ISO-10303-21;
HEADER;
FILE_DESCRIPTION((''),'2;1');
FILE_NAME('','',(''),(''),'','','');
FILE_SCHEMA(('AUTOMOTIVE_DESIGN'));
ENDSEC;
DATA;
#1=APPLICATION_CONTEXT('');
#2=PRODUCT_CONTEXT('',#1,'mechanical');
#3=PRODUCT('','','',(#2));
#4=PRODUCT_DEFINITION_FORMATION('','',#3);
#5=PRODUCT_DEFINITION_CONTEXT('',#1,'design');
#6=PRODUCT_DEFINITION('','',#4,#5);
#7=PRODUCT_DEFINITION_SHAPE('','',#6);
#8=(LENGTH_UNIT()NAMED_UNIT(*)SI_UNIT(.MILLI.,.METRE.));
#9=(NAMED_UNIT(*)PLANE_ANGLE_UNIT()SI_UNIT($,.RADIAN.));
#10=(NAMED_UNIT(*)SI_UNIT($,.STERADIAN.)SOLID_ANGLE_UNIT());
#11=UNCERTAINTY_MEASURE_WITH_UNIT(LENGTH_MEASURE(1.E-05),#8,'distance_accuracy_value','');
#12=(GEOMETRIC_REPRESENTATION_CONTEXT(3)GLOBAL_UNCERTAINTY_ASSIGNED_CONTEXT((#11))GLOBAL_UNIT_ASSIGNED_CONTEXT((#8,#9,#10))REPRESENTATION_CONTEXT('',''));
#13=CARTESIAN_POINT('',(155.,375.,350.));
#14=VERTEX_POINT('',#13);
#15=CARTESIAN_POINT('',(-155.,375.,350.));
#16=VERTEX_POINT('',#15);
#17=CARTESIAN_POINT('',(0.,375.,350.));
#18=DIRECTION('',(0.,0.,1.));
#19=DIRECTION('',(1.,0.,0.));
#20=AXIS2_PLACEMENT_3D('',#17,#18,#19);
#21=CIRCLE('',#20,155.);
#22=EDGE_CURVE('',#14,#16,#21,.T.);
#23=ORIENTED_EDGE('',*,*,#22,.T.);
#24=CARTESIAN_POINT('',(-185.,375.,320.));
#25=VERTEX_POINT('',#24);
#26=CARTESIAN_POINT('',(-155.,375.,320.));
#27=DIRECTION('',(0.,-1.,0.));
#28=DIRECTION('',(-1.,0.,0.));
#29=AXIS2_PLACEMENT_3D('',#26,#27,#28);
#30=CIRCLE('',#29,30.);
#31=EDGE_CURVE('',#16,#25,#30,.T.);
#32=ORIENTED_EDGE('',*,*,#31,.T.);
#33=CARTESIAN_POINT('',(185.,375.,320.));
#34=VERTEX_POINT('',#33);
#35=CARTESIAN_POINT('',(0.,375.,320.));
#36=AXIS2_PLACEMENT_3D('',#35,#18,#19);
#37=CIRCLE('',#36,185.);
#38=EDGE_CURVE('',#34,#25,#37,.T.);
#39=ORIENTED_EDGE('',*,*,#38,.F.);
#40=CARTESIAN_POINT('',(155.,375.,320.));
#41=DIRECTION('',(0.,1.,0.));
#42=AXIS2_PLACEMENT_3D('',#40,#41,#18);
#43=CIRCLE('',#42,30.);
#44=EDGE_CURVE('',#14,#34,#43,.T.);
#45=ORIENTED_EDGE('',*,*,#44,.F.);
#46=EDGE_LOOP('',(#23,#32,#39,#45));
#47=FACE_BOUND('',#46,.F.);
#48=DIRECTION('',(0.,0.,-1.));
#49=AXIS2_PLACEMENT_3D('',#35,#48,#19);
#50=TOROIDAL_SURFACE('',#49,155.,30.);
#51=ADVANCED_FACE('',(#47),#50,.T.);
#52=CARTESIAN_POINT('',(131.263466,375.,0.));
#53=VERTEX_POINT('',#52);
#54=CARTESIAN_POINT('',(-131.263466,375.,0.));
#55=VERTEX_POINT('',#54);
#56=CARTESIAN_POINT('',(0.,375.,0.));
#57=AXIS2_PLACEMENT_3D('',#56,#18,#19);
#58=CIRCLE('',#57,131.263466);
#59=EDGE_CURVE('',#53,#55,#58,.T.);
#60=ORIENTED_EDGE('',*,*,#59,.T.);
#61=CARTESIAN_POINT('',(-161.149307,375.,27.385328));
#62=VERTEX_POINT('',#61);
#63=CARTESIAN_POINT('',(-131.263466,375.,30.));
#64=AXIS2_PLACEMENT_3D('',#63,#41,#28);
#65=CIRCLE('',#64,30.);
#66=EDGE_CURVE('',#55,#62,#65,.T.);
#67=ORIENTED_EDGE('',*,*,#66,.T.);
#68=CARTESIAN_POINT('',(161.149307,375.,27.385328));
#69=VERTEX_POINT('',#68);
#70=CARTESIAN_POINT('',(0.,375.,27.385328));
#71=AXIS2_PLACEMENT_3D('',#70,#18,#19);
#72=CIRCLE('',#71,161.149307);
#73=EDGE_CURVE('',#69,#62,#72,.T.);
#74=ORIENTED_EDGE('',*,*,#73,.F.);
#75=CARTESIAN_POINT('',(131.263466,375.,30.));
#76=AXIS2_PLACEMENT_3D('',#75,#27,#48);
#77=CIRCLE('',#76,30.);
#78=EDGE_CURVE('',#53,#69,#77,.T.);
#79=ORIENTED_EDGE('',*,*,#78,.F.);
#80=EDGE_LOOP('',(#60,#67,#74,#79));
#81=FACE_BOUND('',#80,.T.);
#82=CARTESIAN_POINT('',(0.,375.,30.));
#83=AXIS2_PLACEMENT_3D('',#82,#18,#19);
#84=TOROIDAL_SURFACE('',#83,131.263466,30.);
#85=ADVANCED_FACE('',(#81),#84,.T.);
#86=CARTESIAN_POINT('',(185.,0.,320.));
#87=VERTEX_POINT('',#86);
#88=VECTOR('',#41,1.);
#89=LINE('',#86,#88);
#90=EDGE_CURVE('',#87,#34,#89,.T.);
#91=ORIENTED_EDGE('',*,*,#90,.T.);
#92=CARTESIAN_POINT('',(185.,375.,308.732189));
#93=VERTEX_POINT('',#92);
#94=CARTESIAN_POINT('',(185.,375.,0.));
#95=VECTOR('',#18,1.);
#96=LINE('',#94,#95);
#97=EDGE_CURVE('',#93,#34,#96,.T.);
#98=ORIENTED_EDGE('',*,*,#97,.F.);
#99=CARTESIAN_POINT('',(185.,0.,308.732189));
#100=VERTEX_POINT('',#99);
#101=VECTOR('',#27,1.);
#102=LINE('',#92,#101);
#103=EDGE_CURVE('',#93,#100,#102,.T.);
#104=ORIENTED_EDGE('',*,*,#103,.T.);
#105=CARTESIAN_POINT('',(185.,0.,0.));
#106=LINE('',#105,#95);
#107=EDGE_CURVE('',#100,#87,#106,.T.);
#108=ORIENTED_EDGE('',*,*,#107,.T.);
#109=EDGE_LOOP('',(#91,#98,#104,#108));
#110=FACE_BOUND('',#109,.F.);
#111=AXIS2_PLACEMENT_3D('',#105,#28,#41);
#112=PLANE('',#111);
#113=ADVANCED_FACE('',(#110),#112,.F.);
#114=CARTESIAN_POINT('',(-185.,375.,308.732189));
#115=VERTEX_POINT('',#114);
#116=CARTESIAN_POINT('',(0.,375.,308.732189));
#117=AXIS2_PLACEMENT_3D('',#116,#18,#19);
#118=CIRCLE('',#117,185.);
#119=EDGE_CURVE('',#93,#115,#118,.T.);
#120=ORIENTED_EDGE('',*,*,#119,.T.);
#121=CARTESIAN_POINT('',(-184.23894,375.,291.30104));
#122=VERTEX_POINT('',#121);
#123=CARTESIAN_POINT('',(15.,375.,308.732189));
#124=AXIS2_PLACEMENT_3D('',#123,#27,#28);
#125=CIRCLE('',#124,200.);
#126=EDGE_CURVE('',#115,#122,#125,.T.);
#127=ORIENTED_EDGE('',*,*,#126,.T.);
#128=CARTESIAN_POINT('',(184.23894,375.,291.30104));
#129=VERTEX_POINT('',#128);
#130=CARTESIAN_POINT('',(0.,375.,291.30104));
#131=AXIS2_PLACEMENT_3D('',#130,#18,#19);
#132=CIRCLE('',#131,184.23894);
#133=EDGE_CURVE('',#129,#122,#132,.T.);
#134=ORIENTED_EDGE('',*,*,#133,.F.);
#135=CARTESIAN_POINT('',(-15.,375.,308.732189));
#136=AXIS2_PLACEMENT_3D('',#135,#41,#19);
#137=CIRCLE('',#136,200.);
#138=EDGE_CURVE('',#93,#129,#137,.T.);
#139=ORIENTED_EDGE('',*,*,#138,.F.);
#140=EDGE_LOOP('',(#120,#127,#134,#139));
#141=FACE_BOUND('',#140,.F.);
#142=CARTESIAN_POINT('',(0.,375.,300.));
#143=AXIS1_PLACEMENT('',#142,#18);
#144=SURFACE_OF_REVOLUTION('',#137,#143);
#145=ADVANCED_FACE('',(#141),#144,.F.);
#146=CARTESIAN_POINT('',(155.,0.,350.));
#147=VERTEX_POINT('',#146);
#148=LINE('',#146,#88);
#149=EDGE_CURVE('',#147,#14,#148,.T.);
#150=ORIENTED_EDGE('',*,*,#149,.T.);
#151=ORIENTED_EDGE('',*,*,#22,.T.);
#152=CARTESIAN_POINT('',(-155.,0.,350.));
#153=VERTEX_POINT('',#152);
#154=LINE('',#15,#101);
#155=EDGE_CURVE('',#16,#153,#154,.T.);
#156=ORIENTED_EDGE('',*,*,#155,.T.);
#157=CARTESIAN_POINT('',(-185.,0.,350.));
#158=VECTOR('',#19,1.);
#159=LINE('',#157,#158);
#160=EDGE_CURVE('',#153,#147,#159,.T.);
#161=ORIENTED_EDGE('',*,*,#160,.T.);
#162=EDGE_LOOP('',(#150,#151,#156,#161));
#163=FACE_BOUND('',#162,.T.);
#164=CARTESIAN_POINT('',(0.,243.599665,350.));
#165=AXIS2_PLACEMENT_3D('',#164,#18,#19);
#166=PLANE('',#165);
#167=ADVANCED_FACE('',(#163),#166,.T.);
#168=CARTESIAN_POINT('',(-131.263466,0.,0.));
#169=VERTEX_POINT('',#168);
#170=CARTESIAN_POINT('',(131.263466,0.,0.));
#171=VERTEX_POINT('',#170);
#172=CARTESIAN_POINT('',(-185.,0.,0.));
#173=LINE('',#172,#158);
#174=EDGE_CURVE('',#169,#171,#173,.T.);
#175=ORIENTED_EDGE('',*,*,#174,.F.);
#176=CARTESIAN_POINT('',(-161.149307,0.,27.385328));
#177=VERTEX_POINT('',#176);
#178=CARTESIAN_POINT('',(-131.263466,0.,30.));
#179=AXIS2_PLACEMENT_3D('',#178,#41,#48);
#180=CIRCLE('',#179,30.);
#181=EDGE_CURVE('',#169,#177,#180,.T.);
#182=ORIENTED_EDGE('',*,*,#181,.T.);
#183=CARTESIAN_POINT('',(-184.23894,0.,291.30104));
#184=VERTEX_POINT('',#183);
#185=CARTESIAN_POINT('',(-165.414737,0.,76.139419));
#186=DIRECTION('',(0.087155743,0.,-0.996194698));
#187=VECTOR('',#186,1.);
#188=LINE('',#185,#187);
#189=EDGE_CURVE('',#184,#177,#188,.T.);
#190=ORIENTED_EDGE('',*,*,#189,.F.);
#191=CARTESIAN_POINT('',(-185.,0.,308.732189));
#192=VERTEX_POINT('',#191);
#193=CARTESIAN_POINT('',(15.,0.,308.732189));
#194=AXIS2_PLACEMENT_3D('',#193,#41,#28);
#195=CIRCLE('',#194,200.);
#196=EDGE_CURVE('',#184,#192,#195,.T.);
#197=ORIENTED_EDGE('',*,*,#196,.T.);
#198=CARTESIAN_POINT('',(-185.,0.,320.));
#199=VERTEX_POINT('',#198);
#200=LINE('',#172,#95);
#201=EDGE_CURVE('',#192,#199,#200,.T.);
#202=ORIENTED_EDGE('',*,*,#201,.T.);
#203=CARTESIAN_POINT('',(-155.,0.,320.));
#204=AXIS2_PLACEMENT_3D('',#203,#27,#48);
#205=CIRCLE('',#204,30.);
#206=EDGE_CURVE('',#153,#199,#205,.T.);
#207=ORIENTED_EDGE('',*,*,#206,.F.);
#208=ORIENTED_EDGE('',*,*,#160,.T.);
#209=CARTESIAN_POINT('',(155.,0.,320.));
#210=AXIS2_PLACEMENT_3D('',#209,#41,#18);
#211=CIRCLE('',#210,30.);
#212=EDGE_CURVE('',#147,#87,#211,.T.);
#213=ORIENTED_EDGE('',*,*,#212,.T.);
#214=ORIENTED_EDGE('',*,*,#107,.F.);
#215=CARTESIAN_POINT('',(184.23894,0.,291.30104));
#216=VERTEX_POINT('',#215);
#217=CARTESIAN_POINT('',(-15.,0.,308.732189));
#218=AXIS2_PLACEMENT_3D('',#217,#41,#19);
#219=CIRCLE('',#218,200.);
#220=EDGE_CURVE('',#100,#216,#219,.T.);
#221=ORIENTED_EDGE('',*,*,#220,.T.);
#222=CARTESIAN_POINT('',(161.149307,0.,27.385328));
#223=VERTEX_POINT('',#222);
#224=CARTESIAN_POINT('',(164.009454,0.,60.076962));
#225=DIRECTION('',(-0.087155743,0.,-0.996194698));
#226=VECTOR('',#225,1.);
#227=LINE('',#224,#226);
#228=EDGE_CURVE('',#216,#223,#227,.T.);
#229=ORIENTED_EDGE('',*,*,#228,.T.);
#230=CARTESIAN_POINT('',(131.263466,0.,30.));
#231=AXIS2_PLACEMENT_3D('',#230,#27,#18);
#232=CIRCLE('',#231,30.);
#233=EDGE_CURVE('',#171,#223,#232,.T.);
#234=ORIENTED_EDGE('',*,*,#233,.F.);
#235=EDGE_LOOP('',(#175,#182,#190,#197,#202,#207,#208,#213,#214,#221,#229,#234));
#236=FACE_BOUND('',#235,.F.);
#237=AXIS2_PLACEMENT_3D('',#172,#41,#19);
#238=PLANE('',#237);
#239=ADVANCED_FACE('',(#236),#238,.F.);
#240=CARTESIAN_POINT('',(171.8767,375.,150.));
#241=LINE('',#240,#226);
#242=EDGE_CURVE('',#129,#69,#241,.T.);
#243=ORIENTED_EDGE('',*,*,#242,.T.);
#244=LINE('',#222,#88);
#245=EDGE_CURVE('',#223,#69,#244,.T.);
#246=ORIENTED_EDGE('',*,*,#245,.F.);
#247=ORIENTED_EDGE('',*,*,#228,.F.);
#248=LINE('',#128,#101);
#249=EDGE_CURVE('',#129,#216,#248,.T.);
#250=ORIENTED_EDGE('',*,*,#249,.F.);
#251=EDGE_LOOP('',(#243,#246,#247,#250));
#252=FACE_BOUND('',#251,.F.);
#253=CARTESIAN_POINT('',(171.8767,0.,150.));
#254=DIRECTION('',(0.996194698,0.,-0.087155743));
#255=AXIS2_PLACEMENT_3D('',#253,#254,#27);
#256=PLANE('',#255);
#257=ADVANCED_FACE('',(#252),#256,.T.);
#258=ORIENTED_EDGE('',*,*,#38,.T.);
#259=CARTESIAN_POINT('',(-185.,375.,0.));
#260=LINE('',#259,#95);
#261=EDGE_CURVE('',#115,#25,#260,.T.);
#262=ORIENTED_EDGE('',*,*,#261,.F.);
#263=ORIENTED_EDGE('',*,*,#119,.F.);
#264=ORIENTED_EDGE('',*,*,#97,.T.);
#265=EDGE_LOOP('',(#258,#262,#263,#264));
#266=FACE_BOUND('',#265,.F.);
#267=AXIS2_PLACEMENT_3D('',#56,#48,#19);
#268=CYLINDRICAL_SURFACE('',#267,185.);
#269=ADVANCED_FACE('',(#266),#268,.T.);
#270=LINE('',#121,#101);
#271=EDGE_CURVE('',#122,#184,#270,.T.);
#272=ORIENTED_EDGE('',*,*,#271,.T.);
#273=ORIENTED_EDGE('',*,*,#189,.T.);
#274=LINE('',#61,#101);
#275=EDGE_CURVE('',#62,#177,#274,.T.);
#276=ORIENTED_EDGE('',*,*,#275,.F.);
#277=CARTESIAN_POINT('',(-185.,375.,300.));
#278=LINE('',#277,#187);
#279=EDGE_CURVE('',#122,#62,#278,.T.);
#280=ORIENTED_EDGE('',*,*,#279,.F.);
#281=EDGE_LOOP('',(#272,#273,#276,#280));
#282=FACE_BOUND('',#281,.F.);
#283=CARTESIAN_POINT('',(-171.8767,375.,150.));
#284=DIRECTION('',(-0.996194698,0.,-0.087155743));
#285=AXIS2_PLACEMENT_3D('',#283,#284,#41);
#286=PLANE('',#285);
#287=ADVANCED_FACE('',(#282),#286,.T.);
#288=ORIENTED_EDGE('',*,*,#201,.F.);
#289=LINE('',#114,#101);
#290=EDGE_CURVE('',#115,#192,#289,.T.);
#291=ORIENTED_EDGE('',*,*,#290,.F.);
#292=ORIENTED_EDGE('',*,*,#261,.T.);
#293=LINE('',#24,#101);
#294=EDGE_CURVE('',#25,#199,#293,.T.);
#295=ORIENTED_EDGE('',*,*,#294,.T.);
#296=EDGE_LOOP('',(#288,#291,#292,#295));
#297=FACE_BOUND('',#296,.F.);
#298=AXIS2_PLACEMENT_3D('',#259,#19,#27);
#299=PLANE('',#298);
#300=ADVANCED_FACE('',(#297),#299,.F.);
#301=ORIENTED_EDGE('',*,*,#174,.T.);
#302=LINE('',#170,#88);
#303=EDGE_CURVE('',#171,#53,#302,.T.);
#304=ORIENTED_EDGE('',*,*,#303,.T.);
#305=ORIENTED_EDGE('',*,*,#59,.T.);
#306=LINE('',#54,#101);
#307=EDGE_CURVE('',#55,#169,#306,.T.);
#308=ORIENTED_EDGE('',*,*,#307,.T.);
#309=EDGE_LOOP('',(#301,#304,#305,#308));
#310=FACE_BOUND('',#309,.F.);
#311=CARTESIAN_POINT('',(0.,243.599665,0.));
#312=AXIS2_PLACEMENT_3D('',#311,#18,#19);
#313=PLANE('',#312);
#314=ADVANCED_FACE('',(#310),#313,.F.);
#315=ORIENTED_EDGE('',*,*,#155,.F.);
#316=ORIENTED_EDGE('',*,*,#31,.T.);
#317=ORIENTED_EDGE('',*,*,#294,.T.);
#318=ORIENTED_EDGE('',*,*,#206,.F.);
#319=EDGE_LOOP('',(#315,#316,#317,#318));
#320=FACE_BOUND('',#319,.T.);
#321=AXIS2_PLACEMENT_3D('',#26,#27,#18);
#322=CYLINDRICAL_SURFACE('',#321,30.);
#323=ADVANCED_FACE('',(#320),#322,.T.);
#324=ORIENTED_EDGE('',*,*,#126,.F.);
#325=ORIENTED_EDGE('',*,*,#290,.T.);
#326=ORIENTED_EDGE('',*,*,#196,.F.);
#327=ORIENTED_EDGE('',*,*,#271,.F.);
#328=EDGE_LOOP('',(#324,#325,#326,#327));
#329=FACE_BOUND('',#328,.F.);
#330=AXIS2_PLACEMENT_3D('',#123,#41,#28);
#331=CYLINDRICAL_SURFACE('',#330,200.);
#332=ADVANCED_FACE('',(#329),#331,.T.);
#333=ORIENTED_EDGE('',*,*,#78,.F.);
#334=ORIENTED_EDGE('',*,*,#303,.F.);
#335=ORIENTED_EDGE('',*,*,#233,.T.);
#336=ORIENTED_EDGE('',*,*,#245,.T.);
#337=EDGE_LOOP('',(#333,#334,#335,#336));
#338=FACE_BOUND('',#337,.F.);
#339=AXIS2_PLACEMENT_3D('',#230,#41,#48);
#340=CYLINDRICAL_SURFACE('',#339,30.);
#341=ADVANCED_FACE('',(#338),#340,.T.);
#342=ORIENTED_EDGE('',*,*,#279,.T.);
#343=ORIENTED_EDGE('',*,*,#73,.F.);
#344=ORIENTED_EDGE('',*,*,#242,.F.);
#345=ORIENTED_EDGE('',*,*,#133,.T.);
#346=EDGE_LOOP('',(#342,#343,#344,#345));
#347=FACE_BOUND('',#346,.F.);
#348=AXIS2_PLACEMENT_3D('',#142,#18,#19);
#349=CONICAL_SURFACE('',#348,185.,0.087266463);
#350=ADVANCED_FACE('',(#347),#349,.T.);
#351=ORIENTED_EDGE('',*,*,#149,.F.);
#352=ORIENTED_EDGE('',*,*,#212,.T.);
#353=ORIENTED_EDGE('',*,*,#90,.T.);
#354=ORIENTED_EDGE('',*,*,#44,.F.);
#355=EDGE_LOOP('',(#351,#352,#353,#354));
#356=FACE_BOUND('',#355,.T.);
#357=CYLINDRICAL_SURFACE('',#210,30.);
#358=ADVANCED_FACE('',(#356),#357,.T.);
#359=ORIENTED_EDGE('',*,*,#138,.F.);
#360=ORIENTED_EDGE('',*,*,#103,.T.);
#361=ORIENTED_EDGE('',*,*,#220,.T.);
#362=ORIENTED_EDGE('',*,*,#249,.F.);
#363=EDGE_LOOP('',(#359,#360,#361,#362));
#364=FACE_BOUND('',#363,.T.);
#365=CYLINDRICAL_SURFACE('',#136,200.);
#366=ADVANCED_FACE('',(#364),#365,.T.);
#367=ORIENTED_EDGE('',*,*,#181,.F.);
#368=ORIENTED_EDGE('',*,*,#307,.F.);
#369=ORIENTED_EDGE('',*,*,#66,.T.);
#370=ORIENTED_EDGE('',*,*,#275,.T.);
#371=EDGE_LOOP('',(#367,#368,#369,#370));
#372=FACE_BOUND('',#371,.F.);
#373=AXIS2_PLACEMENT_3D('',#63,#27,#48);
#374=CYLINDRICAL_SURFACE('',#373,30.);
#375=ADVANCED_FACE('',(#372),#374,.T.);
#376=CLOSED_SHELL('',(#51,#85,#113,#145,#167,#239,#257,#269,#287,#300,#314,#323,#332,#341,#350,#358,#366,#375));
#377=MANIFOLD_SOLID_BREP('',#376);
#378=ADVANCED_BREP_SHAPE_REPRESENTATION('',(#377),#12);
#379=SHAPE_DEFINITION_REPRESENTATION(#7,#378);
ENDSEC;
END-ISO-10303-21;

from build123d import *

# Parameters (mm, degrees)
F1_DEPTH    = 350
F2_SIZE2    = 26.2465990578
F2_SIZE     = 300
F3_T1_DEPTH = 396.8304714543
F3_T4_ANGLE = 180
F4_R        = 30


# Not quite as in the source:
# - a fillet or chamfer that OpenCascade refuses, or shapes differently, is made with other operations: its cross-section is extruded or revolved along the edge and cut away or added


with BuildPart() as f1:
    # F0 (on Top) → F1 (new body)
    with BuildSketch(Plane.XY):
        with BuildLine():
            Line((-185, 375), (-185, 0))
            Line((-185, 0), (185, 0))
            Line((185, 0), (185, 375))
            ThreePointArc((185, 375), (130.8147545195, 505.8147545195), (0, 560))
            ThreePointArc((0, 560), (-130.8147545195, 505.8147545195), (-185, 375))
        make_face()
    extrude(amount=F1_DEPTH)

    # F2
    f2_edges = [f1.edges().sort_by_distance(p)[0] for p in [
        (185, 187.5, 0),
        (0, 560, 0),
        (-185, 187.5, 0),
    ]]
    chamfer(f2_edges, length=F2_SIZE, length2=F2_SIZE2)

    # F3: fillet of radius 200 on 3 edges, made by hand

    # F3_s2 → F3_t1 (cut)
    with BuildSketch(Plane.XZ.offset(-375)):
        with BuildLine():
            ThreePointArc((-185, 308.7321885817), (-184.8096443164, 300.0083111086), (-184.2389396183, 291.3010400322))
            Line((-184.2389396183, 291.3010400322), (-185, 300))
            Line((-185, 300), (-185, 308.7321885817))
        make_face()
        with BuildLine():
            ThreePointArc((185, 308.7321885817), (184.8096443164, 300.0083111086), (184.2389396183, 291.3010400322))
            Line((184.2389396183, 291.3010400322), (185, 300))
            Line((185, 300), (185, 308.7321885817))
        make_face()
    extrude(amount=F3_T1_DEPTH, mode=Mode.SUBTRACT)

    # F3_s3 → F3_t4 (revolve, cut)
    with BuildSketch(Plane.XZ.offset(-375)):
        with BuildLine():
            ThreePointArc((185, 308.7321885817), (184.8096443164, 300.0083111086), (184.2389396183, 291.3010400322))
            Line((184.2389396183, 291.3010400322), (185, 300))
            Line((185, 300), (185, 308.7321885817))
        make_face()
    revolve(axis=Axis((0, 375, 300), (0, 0, 1)), revolution_arc=F3_T4_ANGLE, mode=Mode.SUBTRACT)

    # F4
    f4_edges = [f1.edges().sort_by_distance(p)[0] for p in [
        (158.753401, 187.5, 0),
        (0, 533.753401, 0),
        (-158.753401, 187.5, 0),
        (185, 187.5, 350),
        (0, 560, 350),
        (-185, 187.5, 350),
    ]]
    fillet(f4_edges, radius=F4_R)


solid = f1.part
